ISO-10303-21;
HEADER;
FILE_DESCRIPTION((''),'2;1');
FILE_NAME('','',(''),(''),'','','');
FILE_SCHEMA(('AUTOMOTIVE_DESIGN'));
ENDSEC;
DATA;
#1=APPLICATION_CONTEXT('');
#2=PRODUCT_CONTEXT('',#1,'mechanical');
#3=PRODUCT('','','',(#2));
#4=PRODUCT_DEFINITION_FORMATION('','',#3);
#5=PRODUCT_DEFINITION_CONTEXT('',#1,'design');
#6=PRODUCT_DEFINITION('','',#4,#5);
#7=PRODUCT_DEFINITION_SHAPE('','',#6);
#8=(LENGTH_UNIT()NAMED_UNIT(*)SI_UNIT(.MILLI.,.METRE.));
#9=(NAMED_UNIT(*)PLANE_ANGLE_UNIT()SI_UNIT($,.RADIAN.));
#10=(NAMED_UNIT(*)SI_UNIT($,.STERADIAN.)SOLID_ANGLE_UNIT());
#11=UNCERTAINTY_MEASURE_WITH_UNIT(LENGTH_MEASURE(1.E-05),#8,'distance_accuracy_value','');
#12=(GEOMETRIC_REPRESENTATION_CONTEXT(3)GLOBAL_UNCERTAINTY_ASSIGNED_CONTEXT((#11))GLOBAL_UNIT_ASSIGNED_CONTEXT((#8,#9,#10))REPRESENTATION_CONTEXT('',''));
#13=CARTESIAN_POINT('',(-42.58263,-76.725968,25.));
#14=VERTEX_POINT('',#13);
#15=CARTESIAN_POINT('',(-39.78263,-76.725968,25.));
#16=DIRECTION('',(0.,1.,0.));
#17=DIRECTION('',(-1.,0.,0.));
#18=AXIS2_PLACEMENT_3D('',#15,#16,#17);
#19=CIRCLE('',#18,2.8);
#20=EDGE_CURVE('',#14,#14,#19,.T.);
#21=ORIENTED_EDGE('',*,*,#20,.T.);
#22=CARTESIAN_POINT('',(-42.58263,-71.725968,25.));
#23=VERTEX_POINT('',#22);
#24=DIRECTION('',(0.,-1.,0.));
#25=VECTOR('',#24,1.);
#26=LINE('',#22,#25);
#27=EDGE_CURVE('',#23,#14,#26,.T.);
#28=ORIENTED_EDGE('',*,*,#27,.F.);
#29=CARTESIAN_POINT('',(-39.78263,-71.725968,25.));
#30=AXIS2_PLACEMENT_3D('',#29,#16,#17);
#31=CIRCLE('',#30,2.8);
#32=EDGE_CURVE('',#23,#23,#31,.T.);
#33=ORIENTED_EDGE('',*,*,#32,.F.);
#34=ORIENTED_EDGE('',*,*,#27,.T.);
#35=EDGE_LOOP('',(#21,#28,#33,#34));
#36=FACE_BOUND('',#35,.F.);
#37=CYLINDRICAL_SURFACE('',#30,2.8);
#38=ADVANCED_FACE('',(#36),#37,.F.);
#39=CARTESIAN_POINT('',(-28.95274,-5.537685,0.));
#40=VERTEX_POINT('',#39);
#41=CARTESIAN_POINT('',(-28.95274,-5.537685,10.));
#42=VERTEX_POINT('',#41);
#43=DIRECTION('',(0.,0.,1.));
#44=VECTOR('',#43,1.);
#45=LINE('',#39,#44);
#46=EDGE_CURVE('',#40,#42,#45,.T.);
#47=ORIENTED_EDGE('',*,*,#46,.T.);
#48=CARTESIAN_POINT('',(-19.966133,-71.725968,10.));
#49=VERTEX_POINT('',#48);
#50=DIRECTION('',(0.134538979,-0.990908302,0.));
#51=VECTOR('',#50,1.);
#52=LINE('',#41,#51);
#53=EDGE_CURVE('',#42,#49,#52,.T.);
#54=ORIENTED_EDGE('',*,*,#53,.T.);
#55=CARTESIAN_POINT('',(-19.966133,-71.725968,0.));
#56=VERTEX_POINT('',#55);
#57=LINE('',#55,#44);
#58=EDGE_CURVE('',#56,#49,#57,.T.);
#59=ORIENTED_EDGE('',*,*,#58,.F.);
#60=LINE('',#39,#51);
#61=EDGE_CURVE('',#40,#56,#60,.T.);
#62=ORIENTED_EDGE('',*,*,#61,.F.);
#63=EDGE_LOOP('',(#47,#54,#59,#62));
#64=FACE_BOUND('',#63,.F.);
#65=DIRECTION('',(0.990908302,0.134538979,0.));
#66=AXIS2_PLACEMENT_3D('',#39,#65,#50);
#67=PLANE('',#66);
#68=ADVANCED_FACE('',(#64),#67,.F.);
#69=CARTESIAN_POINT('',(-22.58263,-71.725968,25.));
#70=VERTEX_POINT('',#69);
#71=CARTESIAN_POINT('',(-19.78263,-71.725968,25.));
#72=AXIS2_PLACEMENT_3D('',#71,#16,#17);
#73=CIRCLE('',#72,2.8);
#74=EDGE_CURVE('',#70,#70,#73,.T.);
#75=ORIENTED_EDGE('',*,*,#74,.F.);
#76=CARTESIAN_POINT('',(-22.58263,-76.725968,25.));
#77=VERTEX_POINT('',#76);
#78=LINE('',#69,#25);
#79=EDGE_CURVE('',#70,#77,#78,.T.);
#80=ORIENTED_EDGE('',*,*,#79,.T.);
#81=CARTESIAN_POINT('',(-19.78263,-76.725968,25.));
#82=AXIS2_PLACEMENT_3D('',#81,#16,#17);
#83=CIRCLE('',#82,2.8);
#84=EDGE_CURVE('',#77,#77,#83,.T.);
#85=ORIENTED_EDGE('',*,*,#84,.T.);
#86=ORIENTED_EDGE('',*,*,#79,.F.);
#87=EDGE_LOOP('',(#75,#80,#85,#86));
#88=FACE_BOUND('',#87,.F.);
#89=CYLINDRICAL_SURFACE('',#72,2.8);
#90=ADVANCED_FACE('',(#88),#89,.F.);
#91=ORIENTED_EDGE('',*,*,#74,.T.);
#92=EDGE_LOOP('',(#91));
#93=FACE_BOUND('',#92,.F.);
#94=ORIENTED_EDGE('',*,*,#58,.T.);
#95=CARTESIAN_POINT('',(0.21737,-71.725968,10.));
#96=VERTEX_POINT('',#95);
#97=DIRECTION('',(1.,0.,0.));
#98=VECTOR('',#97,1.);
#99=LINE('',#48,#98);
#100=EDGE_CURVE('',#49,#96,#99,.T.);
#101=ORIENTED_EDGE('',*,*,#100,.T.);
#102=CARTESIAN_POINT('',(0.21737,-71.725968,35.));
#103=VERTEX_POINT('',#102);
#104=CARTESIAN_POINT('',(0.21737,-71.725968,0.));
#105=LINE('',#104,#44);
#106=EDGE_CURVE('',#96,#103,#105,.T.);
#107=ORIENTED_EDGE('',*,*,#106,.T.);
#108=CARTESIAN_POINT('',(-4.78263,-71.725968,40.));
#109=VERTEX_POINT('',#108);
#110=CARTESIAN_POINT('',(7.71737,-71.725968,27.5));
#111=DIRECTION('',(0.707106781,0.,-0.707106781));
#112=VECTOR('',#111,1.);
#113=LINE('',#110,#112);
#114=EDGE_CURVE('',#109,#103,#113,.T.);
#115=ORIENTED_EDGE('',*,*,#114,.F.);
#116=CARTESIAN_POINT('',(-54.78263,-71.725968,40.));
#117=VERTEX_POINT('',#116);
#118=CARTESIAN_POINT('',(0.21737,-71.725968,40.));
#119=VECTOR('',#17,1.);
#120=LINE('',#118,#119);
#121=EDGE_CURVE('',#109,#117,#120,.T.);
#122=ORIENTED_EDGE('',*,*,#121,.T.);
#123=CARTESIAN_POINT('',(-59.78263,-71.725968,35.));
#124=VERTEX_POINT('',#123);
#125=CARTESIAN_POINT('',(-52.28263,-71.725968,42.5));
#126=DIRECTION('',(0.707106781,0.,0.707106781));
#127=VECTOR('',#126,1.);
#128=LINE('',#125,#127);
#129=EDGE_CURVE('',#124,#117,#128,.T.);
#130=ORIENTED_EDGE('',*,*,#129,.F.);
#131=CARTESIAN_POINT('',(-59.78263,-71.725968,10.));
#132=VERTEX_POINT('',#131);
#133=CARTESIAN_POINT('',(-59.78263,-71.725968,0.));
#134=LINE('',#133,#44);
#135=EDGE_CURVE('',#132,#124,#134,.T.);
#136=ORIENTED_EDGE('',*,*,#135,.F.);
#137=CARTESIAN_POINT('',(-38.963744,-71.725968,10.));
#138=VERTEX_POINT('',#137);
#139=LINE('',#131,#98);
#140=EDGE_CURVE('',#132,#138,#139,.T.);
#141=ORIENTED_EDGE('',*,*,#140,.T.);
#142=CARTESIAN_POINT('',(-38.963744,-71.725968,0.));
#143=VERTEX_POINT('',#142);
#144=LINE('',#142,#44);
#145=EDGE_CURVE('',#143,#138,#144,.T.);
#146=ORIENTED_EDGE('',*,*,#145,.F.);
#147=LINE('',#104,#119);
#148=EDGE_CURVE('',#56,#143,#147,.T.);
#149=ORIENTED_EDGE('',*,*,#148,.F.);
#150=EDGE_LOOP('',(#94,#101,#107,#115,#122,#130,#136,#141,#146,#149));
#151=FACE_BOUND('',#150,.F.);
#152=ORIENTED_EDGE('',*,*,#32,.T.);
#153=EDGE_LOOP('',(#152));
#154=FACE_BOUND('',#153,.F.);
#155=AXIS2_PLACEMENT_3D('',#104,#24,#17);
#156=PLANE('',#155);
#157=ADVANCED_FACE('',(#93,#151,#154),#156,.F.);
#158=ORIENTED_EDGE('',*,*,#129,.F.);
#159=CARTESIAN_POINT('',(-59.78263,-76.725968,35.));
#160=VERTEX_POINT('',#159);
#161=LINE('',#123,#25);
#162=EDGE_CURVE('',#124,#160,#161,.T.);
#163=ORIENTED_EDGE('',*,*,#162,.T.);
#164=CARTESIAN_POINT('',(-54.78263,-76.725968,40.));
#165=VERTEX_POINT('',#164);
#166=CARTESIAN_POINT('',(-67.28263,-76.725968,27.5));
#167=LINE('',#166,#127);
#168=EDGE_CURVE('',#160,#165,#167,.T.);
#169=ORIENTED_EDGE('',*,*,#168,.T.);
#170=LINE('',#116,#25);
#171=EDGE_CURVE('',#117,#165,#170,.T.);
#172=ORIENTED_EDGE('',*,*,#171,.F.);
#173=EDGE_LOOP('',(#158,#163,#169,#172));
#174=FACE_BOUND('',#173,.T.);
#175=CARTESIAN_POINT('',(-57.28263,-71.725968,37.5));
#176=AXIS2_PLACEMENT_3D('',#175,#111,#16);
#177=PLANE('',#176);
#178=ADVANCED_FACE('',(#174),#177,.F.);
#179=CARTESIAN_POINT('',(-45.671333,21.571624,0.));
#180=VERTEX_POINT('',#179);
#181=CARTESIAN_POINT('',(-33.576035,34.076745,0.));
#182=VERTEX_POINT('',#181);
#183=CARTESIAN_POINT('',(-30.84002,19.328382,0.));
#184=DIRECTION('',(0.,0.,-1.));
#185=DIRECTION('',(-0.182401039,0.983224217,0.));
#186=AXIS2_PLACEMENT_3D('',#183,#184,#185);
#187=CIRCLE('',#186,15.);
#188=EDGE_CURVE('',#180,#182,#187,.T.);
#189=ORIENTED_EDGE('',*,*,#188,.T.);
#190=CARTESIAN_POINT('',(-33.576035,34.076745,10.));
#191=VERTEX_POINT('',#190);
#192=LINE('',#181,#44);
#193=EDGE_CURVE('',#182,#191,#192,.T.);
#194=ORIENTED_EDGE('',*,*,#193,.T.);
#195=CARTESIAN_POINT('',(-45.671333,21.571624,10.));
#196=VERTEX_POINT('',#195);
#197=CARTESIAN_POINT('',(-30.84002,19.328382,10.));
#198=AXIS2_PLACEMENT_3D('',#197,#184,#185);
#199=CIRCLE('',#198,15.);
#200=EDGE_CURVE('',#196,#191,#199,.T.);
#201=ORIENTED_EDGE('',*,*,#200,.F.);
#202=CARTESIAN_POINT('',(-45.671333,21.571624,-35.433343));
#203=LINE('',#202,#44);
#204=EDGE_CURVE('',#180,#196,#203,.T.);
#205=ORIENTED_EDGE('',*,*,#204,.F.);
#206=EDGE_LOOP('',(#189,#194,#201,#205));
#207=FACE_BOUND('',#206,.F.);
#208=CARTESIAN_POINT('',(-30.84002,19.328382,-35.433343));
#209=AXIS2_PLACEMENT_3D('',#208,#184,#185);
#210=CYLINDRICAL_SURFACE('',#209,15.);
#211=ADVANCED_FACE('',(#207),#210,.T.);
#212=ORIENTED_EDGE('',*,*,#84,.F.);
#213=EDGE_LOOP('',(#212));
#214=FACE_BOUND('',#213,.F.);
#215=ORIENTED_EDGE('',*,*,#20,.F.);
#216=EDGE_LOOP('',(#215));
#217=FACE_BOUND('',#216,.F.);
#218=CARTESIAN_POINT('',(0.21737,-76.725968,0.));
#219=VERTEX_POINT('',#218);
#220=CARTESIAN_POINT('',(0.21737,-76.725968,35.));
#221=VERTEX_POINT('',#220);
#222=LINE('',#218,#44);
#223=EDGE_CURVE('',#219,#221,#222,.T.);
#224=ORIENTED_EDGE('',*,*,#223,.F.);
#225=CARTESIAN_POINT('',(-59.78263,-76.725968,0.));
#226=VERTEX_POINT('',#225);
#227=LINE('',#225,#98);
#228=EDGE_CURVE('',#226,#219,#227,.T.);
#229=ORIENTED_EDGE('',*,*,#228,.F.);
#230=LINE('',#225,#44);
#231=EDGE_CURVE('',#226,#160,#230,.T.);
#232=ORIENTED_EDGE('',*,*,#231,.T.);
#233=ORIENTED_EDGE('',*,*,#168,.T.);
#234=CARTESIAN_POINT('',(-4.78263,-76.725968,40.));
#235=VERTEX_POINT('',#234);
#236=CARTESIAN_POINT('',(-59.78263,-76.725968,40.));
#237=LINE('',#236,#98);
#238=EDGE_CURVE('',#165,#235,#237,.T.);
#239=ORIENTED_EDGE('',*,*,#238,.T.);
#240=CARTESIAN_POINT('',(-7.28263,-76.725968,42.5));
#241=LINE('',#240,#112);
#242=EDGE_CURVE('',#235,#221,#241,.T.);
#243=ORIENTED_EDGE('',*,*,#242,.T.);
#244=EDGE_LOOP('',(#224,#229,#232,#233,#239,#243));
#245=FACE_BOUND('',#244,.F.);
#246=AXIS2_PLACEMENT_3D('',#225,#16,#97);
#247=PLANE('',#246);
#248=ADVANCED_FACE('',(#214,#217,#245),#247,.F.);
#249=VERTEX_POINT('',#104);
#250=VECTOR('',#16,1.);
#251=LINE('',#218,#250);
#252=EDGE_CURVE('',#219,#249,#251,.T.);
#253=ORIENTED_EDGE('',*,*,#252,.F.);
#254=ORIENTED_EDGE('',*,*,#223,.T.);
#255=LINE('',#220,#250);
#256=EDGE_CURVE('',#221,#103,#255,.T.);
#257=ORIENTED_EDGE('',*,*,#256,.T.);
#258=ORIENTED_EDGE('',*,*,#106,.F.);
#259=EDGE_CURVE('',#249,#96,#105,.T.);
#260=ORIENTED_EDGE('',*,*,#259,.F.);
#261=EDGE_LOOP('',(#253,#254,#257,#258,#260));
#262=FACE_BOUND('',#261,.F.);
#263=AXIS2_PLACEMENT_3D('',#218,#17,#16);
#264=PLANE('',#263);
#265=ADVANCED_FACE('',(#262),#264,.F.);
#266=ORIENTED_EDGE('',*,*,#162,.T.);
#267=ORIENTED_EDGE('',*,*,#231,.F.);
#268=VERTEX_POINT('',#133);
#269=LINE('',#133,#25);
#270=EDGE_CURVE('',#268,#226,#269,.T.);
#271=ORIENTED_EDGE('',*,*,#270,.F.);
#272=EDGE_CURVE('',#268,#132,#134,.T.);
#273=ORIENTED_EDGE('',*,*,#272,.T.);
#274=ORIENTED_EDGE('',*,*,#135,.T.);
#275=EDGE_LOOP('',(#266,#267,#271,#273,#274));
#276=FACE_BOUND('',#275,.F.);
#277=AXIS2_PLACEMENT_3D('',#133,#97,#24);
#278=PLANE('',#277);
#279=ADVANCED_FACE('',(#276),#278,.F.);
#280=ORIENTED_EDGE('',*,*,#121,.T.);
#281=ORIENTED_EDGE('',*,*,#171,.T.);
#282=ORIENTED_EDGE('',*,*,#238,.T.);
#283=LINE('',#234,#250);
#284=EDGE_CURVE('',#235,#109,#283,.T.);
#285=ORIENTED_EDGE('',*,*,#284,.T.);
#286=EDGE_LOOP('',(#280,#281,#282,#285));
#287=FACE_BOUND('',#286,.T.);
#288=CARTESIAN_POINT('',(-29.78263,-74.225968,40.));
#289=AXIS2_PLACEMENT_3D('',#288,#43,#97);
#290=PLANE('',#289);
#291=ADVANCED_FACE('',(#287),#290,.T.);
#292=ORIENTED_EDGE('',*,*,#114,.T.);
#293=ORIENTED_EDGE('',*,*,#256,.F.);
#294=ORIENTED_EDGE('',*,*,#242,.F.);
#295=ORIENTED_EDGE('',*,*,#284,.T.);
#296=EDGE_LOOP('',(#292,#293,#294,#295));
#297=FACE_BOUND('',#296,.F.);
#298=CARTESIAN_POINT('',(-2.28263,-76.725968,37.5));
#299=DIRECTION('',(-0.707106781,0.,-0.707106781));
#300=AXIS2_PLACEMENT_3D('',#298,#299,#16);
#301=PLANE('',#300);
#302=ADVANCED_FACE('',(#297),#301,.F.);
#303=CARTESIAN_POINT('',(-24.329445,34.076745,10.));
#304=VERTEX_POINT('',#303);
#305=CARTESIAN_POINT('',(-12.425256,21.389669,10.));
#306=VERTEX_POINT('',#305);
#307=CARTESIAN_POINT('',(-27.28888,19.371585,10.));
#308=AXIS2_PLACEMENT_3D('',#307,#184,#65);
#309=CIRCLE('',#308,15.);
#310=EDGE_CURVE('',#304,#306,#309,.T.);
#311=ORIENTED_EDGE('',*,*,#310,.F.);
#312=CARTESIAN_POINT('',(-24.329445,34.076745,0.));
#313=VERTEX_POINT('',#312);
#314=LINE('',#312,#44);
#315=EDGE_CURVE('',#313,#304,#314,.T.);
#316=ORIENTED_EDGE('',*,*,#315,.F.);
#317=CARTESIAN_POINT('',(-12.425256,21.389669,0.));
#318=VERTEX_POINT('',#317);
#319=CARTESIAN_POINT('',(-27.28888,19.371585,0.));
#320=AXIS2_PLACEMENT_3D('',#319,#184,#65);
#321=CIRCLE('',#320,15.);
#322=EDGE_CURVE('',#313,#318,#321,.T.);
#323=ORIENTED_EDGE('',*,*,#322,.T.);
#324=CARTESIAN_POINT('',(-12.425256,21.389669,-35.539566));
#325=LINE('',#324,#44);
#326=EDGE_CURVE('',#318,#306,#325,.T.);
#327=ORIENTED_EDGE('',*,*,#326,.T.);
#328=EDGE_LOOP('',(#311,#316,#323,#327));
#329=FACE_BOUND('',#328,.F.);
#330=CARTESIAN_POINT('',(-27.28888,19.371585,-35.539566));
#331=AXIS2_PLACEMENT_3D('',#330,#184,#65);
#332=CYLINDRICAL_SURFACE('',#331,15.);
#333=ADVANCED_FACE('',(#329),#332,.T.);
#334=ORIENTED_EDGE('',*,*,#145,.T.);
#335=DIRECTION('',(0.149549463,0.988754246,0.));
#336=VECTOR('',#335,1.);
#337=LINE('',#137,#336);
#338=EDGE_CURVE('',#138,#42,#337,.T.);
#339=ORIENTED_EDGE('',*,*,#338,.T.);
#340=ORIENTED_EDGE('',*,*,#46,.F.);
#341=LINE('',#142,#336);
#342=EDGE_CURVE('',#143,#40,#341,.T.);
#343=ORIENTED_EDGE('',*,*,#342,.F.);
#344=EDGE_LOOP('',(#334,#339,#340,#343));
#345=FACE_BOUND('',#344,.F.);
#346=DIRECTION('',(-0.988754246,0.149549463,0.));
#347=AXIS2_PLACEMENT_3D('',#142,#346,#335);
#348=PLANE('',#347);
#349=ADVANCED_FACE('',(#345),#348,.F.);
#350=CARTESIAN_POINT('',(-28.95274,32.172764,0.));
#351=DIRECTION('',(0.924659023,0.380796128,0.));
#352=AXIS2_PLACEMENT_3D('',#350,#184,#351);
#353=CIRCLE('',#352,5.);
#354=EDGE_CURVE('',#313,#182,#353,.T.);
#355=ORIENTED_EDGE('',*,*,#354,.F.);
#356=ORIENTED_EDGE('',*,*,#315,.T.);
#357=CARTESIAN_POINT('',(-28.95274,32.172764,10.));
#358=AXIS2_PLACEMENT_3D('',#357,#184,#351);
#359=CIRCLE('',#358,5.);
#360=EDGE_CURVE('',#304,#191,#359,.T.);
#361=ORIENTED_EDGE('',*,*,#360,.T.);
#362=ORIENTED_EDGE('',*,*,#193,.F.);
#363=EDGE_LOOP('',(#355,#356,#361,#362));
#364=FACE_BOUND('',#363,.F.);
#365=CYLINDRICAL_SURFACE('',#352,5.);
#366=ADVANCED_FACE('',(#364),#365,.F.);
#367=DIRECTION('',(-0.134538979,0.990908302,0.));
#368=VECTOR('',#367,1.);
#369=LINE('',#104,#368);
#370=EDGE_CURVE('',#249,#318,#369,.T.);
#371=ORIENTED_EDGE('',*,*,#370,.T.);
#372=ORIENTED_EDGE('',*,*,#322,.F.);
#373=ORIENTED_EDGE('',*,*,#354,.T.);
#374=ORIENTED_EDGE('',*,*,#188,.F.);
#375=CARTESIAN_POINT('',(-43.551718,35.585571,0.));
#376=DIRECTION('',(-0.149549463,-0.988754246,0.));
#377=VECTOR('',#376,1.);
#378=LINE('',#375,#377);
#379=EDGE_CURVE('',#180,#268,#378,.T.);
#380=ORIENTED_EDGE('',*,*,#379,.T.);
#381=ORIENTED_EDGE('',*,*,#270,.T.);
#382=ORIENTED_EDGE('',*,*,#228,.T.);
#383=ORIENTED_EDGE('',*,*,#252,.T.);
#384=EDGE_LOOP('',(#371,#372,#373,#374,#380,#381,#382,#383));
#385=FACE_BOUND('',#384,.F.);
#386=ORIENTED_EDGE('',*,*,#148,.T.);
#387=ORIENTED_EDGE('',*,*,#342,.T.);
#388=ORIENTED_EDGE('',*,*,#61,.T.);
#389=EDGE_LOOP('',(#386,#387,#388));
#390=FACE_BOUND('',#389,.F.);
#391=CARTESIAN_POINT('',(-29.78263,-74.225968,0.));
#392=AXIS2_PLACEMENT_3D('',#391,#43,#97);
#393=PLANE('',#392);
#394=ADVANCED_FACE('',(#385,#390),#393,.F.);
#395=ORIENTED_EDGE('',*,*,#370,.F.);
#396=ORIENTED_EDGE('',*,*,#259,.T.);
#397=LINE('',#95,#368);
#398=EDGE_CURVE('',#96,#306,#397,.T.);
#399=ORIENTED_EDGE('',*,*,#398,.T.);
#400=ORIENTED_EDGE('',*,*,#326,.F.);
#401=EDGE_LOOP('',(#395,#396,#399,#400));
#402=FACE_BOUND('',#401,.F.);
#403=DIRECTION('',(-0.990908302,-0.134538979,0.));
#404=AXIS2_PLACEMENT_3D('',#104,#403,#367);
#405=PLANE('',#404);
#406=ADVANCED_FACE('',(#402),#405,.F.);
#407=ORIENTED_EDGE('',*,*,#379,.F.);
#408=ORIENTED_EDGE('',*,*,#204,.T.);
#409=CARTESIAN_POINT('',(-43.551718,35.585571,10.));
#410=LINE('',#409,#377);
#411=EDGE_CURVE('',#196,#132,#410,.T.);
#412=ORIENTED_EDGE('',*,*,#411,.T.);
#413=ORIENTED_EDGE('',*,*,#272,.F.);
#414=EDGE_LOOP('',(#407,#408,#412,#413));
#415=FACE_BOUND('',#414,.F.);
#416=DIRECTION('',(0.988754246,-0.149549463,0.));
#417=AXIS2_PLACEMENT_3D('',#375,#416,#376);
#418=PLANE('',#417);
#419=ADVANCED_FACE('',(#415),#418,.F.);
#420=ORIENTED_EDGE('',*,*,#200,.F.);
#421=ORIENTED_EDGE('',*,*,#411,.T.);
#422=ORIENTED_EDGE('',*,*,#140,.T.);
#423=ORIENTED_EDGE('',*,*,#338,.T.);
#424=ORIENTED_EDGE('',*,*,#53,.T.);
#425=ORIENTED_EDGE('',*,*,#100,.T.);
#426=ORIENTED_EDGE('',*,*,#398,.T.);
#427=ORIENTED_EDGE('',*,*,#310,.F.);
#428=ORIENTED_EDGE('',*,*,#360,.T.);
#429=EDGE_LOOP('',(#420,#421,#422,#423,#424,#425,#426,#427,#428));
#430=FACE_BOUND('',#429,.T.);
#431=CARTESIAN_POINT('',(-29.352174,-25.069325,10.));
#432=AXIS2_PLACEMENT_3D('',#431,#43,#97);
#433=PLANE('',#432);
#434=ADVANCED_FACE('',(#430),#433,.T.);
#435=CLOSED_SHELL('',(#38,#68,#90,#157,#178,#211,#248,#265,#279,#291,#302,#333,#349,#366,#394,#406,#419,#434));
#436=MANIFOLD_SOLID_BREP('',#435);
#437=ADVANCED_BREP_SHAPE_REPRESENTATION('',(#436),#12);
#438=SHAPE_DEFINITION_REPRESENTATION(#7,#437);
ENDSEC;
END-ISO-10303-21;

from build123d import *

# Parameters (mm, degrees)
F1_DEPTH    = 10
F2_DEPTH    = 40
F3_R        = 2.8
F4_DEPTH    = 5
F5_T1_DEPTH = 80.8666856224
F5_T3_DEPTH = 81.0791317508
F6_SIZE     = 5


# Not quite as in the source:
# - a fillet or chamfer that OpenCascade refuses, or shapes differently, is made with other operations: its cross-section is extruded or revolved along the edge and cut away or added


with BuildPart() as f1:
    # F0 (on Top) → F1 (new body)
    with BuildSketch(Plane.XY):
        with BuildLine():
            Line((-43.5517183587, 35.5855710396), (-59.7826302073, -71.725967915))
            Line((-59.7826302073, -71.725967915), (-38.9637436029, -71.725967915))
            Line((-38.9637436029, -71.725967915), (-28.9527400952, -5.5376845384))
            Line((-28.9527400952, -5.5376845384), (-19.966132513, -71.725967915))
            Line((-19.966132513, -71.725967915), (0.2173697927, -71.725967915))
            Line((0.2173697927, -71.725967915), (-14.3378386668, 35.4762497537))
            Line((-14.3378386668, 35.4762497537), (-24.3294449803, 34.076745098))
            ThreePointArc((-24.3294449803, 34.076745098), (-28.9527400952, 27.172764457), (-33.57603521, 34.076745098))
            Line((-33.57603521, 34.076745098), (-43.5517183587, 35.5855710396))
        make_face()
    extrude(amount=F1_DEPTH)

    # F0 (on Top) → F2 (join)
    with BuildSketch(Plane.XY):
        Polygon((-38.9637436029, -71.725967915), (-59.7826302073, -71.725967915), (-59.7826302073, -76.725967915), (0.2173697927, -76.725967915), (0.2173697927, -71.725967915), (-19.966132513, -71.725967915), align=None)
    extrude(amount=F2_DEPTH)

    # F3 (on face) → F4 (cut, through all)
    with BuildSketch(Plane(origin=(0, -71.725967915, 0), x_dir=(-1, 0, 0), z_dir=(0, 1, 0))):
        with Locations((39.7826302073, 25)):
            Circle(F3_R)
        with Locations((19.7826302073, 25)):
            Circle(F3_R)
    extrude(amount=-F4_DEPTH, mode=Mode.SUBTRACT)

    # F5: fillet of radius 15 on 2 edges, made by hand

    # F5_s2 → F5_t1 (cut)
    with BuildSketch(Plane.XY.offset(-35.4333428112)):
        with BuildLine():
            ThreePointArc((-33.57603521, 34.076745098), (-41.6218227772, 29.7568391026), (-45.6713333114, 21.5716237836))
            Line((-45.6713333114, 21.5716237836), (-43.5517183587, 35.5855710396))
            Line((-43.5517183587, 35.5855710396), (-33.57603521, 34.076745098))
        make_face()
    extrude(amount=F5_T1_DEPTH, mode=Mode.SUBTRACT)

    # F5_s4 → F5_t3 (cut)
    with BuildSketch(Plane.XY.offset(-35.5395658754)):
        with BuildLine():
            ThreePointArc((-12.4252559054, 21.3896694023), (-16.3501492828, 29.6353150708), (-24.3294449803, 34.076745098))
            Line((-24.3294449803, 34.076745098), (-14.3378386668, 35.4762497537))
            Line((-14.3378386668, 35.4762497537), (-12.4252559054, 21.3896694023))
        make_face()
    extrude(amount=F5_T3_DEPTH, mode=Mode.SUBTRACT)

    # F6
    f6_edges = [f1.edges().sort_by_distance(p)[0] for p in [
        (0.21737, -74.225968, 40),
        (-59.78263, -74.225968, 40),
    ]]
    chamfer(f6_edges, length=F6_SIZE)


solid = f1.part
